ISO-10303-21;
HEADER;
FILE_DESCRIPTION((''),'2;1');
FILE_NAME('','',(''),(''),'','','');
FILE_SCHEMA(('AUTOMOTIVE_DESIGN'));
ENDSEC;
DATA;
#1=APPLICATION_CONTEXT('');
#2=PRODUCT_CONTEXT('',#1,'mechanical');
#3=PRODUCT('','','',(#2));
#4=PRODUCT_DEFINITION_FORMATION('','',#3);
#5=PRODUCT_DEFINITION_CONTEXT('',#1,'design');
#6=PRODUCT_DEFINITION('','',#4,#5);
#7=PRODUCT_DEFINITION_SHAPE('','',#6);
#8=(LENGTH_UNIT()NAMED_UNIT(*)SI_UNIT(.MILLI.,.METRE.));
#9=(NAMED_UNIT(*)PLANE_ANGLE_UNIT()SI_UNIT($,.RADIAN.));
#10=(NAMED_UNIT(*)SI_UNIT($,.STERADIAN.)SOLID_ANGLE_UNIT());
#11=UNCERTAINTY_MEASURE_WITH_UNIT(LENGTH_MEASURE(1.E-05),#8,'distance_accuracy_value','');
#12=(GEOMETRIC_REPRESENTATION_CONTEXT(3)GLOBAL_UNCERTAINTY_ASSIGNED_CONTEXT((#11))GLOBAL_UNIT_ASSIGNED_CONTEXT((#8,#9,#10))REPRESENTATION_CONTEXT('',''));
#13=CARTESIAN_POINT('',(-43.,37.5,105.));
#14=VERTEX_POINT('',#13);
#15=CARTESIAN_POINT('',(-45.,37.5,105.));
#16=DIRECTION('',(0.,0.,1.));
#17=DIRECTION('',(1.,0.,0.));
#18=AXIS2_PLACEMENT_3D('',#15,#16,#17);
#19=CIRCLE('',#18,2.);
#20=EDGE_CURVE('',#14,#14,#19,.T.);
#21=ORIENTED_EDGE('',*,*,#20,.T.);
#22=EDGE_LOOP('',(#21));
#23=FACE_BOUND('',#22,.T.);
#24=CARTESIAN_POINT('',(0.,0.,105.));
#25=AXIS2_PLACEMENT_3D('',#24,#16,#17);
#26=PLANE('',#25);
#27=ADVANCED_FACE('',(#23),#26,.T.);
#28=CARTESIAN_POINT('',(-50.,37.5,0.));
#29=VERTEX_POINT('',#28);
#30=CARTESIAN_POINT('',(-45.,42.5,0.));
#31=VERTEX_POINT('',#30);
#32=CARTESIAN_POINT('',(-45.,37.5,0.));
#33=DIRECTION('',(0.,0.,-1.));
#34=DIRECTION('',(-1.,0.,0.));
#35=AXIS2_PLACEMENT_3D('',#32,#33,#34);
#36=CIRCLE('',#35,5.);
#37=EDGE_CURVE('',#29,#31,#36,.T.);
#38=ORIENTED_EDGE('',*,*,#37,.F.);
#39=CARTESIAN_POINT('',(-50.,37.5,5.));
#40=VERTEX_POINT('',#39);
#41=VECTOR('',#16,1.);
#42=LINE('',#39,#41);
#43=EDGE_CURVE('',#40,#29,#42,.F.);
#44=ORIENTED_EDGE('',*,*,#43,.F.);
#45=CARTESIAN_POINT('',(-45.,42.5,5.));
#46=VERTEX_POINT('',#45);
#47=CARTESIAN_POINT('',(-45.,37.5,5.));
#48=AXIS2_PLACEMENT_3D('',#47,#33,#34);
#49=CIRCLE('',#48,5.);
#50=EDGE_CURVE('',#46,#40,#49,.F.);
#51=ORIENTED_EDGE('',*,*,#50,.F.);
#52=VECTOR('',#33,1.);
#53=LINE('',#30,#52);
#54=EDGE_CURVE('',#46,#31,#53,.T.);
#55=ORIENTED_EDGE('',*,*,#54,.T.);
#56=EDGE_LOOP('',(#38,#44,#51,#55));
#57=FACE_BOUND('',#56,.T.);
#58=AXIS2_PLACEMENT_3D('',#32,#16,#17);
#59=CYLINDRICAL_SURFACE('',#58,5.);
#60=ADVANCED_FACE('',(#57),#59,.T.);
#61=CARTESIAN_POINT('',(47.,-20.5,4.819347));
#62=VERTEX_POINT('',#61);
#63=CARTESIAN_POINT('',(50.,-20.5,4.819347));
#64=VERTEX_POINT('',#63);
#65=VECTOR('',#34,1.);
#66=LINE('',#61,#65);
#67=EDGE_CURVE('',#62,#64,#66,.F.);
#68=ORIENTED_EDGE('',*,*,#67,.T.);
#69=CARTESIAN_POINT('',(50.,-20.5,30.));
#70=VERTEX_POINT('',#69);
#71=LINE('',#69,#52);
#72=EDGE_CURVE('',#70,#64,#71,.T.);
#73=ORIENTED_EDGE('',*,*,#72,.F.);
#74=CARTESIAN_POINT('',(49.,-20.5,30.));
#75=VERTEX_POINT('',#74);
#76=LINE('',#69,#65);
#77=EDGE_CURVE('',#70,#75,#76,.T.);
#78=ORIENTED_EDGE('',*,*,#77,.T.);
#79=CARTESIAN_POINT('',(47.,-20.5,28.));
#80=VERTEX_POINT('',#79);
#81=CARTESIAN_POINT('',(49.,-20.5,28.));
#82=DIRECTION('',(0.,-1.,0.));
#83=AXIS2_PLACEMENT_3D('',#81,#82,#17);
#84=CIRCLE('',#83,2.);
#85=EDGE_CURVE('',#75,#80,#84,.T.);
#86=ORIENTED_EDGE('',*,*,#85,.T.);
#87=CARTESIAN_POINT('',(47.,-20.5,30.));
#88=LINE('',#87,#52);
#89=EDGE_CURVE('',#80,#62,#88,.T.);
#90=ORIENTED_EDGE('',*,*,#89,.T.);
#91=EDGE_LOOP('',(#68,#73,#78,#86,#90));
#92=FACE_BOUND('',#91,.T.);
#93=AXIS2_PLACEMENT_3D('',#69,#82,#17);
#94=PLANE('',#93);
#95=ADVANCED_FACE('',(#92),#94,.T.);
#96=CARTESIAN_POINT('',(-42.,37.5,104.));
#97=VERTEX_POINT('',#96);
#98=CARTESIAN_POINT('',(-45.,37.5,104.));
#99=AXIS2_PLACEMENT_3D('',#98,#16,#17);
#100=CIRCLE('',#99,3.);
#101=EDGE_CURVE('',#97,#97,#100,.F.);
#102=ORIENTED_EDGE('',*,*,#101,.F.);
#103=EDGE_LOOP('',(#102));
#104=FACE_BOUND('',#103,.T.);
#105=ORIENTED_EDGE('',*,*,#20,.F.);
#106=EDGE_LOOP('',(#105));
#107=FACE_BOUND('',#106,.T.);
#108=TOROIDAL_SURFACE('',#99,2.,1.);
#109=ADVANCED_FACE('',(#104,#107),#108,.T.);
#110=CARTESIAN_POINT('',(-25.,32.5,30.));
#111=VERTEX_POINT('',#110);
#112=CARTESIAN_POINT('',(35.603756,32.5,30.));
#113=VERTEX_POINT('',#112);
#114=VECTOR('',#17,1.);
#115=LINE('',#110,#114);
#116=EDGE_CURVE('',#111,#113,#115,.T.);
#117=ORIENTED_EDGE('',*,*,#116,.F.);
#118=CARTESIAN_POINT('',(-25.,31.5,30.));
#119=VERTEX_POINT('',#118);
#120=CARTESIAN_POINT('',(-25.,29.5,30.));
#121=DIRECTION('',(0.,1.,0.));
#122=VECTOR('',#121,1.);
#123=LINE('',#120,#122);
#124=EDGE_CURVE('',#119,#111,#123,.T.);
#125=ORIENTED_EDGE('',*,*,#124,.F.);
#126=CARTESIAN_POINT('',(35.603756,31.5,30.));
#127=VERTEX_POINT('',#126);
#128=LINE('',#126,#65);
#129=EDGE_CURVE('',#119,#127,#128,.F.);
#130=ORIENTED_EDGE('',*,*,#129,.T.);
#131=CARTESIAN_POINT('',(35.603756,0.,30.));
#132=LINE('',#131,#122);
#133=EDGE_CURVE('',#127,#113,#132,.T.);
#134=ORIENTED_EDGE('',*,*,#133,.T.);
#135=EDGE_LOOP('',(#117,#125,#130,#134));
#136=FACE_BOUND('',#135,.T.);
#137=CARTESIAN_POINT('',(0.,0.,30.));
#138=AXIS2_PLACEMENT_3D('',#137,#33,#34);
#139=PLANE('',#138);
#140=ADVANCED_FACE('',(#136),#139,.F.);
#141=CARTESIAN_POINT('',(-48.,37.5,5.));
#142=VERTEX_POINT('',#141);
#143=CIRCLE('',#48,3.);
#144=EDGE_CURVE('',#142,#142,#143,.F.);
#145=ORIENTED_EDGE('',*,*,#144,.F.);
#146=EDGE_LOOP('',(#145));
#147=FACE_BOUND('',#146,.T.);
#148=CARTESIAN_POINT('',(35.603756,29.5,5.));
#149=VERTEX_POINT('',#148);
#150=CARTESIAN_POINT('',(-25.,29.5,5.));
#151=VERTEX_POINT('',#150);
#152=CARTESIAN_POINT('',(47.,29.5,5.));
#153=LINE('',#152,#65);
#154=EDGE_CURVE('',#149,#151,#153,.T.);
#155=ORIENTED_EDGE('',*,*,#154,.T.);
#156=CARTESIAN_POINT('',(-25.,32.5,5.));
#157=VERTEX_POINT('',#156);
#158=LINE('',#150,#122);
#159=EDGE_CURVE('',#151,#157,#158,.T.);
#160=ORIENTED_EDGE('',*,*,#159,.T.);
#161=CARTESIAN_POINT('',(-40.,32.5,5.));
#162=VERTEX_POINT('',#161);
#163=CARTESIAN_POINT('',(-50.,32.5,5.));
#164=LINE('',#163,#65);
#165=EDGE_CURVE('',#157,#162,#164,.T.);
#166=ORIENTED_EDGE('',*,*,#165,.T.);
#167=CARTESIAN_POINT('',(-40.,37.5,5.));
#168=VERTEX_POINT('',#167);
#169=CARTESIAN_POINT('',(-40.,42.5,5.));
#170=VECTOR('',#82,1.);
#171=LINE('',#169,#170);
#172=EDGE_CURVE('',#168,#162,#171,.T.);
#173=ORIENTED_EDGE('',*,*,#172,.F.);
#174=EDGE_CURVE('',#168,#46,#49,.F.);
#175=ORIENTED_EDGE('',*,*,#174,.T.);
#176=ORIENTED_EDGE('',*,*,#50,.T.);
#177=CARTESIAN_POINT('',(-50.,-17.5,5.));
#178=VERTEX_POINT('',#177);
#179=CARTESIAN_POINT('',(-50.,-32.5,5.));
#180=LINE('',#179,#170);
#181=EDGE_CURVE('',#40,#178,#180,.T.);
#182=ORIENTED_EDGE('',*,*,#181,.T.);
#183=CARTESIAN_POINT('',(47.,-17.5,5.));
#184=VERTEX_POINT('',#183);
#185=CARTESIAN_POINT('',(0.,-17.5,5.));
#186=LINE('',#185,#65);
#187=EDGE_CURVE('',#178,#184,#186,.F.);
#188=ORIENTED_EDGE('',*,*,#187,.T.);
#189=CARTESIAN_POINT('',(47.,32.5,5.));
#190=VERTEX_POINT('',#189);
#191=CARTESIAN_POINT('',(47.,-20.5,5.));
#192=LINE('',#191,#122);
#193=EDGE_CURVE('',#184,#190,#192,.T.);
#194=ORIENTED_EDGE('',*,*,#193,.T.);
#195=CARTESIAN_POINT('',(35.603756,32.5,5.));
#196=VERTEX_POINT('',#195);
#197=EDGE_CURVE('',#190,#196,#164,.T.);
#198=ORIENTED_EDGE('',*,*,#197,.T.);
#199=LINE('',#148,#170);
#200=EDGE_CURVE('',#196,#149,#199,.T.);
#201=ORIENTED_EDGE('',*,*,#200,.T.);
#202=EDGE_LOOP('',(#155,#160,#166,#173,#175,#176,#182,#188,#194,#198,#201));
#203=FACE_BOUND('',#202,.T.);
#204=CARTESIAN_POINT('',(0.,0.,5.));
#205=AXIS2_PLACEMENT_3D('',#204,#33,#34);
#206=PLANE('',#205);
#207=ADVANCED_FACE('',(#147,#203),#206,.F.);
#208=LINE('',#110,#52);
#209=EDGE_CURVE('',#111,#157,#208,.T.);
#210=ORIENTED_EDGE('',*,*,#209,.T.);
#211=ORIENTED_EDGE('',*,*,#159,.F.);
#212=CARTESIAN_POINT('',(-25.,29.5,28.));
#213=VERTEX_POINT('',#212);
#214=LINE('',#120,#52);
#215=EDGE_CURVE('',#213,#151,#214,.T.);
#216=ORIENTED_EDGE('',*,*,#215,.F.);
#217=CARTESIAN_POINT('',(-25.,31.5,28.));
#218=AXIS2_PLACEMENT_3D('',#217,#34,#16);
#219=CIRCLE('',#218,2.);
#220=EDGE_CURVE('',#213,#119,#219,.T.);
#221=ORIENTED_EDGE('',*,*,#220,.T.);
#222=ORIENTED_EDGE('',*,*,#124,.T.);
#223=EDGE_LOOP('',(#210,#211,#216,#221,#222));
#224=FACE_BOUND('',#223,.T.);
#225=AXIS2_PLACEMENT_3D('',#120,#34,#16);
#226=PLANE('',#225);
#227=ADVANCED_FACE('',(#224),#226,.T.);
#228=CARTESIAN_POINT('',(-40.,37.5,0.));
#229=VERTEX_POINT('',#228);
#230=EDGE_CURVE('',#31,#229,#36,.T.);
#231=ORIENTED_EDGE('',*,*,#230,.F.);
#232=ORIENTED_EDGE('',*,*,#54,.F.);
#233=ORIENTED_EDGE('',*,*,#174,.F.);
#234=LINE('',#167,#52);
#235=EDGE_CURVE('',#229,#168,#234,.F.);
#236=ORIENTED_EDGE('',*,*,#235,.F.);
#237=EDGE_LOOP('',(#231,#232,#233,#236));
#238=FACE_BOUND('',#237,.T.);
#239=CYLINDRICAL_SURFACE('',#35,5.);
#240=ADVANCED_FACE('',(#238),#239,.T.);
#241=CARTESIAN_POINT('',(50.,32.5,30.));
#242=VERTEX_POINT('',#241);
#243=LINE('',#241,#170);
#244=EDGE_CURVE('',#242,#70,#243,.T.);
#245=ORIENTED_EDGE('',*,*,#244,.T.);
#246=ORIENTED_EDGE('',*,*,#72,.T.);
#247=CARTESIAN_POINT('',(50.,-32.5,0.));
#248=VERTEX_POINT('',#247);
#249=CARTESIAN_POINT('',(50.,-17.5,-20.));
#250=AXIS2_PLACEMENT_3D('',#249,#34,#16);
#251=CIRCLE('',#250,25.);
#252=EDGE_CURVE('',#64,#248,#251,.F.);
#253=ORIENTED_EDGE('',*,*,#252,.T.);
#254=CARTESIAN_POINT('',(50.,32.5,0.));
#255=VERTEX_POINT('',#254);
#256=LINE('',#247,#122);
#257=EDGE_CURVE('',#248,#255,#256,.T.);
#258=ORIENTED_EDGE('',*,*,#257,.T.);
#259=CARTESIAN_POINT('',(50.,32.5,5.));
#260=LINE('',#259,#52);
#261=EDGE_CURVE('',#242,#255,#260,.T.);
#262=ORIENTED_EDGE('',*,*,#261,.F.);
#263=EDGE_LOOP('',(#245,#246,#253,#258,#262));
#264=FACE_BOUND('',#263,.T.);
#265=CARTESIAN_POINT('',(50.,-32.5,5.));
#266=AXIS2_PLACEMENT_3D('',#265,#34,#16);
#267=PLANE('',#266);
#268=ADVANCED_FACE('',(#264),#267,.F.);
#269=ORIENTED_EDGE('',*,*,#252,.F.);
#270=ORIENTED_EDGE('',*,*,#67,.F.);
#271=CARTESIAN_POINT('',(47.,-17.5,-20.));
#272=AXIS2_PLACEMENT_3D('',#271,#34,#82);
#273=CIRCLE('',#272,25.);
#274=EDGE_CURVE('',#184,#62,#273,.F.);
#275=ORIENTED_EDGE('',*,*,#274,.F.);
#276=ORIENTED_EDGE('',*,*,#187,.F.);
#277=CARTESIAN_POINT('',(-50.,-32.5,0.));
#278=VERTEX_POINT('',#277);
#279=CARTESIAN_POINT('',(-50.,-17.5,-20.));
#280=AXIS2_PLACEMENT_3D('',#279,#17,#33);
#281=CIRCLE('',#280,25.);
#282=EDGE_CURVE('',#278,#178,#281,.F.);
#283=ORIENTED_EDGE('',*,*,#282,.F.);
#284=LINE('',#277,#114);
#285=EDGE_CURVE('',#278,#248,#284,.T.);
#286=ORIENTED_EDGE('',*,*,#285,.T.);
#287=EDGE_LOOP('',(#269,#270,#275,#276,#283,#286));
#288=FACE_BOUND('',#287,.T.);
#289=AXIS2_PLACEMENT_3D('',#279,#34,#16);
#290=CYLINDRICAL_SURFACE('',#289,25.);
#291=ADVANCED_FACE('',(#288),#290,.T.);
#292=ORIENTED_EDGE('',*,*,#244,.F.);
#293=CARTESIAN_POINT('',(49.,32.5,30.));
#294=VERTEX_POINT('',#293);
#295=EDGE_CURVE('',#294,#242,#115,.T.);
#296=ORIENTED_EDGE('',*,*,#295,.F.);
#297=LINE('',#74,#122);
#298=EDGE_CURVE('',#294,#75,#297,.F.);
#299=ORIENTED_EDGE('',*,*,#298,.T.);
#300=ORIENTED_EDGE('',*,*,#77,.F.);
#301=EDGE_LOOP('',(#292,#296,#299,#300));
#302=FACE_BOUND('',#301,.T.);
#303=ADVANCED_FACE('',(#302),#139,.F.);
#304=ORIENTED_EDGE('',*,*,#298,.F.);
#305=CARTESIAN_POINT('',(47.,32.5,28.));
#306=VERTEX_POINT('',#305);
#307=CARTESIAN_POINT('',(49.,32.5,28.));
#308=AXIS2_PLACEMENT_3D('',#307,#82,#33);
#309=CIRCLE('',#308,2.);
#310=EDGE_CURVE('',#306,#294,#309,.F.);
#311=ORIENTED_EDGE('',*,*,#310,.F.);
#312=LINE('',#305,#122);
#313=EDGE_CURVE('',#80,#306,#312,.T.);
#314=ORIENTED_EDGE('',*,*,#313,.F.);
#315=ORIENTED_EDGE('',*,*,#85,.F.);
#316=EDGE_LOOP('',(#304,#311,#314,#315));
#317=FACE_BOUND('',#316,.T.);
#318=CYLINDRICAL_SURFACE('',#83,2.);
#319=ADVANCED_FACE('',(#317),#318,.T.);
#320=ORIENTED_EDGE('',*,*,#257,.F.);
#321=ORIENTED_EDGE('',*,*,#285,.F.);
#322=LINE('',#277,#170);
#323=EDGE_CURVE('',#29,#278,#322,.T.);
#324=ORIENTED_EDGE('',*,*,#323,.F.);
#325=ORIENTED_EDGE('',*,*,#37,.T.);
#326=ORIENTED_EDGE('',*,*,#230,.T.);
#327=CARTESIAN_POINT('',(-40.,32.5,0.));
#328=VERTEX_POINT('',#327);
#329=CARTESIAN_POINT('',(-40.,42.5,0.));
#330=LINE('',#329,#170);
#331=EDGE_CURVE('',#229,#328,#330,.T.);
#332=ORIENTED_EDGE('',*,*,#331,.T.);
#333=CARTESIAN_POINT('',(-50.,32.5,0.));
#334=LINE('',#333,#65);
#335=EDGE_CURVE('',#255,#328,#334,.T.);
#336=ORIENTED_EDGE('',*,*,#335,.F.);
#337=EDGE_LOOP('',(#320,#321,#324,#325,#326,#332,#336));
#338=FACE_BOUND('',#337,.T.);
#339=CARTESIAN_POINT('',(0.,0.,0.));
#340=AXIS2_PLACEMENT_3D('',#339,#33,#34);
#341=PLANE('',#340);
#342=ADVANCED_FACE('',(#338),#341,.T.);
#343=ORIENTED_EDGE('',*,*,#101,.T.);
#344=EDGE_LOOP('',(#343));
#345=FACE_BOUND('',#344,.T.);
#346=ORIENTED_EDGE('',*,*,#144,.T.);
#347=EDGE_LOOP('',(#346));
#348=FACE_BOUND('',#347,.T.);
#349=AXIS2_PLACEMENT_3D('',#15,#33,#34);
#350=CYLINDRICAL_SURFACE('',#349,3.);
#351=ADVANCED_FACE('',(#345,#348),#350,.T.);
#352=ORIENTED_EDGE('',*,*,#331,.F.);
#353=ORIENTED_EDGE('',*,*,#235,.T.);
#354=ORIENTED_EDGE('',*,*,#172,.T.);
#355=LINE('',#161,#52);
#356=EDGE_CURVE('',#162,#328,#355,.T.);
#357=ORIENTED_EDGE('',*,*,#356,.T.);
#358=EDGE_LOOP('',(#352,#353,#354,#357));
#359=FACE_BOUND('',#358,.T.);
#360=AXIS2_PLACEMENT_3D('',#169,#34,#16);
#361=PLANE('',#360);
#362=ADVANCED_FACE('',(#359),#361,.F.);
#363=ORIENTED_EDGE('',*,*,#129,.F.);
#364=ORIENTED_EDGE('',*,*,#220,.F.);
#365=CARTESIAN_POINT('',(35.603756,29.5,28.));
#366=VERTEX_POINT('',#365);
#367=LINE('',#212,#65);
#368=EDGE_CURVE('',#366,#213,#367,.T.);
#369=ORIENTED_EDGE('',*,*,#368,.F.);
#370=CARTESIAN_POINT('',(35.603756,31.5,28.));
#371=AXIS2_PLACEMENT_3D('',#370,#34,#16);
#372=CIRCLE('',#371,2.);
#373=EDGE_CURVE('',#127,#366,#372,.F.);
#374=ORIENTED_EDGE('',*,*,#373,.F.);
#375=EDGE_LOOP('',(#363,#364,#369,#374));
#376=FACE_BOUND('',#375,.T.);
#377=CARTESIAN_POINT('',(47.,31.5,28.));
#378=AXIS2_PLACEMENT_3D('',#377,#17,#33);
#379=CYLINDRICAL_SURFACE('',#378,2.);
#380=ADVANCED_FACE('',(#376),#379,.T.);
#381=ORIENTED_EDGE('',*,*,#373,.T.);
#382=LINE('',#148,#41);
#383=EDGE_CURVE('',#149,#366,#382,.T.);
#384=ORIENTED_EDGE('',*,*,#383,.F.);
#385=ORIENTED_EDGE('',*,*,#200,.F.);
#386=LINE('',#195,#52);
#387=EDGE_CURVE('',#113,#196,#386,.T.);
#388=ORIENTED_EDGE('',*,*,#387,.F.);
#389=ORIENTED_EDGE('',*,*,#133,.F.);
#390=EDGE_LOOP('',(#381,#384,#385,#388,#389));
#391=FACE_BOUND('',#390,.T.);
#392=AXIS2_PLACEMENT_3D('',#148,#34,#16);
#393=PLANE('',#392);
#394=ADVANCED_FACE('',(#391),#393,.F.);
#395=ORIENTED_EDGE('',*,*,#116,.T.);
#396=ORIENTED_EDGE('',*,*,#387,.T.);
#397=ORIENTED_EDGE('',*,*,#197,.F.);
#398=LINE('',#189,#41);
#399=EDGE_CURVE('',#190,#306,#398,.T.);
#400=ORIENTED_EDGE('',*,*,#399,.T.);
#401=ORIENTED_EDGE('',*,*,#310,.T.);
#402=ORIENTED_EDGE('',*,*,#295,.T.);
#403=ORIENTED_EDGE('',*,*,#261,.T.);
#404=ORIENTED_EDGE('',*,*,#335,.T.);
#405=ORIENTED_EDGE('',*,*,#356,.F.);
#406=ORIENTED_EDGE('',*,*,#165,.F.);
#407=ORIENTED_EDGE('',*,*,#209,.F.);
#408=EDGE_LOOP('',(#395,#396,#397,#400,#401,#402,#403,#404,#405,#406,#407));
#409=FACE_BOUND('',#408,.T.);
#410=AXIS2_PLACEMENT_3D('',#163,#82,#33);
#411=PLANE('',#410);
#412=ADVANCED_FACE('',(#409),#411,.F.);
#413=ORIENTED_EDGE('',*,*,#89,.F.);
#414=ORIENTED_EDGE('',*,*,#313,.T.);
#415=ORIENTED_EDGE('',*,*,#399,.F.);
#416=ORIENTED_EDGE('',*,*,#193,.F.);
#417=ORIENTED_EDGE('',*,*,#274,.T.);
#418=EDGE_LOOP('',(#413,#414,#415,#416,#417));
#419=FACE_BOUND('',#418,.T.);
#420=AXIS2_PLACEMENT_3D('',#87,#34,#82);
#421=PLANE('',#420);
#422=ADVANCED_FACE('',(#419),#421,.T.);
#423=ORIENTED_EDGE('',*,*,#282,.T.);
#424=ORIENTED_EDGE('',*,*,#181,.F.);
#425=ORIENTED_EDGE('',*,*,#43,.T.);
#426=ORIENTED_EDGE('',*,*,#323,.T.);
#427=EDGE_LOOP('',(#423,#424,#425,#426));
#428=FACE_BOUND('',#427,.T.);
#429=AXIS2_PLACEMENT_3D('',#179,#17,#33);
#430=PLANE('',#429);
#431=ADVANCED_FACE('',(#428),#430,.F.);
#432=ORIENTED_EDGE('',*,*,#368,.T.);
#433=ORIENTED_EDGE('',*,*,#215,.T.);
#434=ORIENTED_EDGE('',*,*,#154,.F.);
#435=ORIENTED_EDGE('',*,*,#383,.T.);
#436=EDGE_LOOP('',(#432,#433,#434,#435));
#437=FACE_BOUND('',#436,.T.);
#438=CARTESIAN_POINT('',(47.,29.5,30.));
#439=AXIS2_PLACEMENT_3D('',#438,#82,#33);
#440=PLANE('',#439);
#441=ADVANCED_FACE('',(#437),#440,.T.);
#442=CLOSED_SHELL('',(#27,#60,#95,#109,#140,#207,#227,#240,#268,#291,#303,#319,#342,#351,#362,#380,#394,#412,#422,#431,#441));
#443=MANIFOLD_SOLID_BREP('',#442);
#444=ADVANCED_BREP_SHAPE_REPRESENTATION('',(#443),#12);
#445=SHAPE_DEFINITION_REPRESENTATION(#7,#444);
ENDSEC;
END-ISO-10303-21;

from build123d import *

# Parameters (mm, degrees)
SKETCH1_W           = 100
SKETCH1_H           = 65
BOSS_EXTRUDE2_DEPTH = 5
BOSS_EXTRUDE3_DEPTH = 10
BOSS_EXTRUDE4_DEPTH = 25
BOSS_EXTRUDE5_DEPTH = 100
FILLET1_R           = 5
FILLET2_R           = 25
FILLET5_R           = 1
SKETCH7_W           = 11.396244365786963
SKETCH7_H           = 3.3746398880239497
CUT_EXTRUDE2_DEPTH  = 25
FILLET7_R           = 2


# Some blends are built 0.0001 mm under size
with BuildPart() as part:
    # Sketch1 → Boss-Extrude2 (new body)
    with BuildSketch(Plane.XY):
        Rectangle(SKETCH1_W, SKETCH1_H)
    extrude(amount=BOSS_EXTRUDE2_DEPTH)

    # Sketch3 → Boss-Extrude3 (add)
    with BuildSketch(Plane(origin=(0, 32.499999999999986, 0), x_dir=(1, 0, 0), z_dir=(0, 1, 0))):
        Polygon((-50.00000000000001, -5), (-40.00000000000001, -5), (-40, 0), (-50.00000000000001, 0), align=None)
    extrude(amount=BOSS_EXTRUDE3_DEPTH)

    # Sketch4 → Boss-Extrude4 (add)
    with BuildSketch(Plane.XY.offset(5)):
        Polygon((49.99999999999999, 32.499999999999986), (50, -20.50000000000001), (47, -20.500000000000014), (46.99999999999999, 29.49999999999999), (-25, 29.49999999999999), (-25, 32.499999999999986), align=None)
    extrude(amount=BOSS_EXTRUDE4_DEPTH)

    # Sketch5 → Boss-Extrude5 (add)
    with BuildSketch(Plane.XY.offset(5)):
        with BuildLine():
            ThreePointArc((-48.000000000000014, 37.49999999999999), (-45.000000000000014, 34.49999999999999), (-42.000000000000014, 37.49999999999999))
            Line((-42.000000000000014, 37.49999999999999), (-45.000000000000014, 37.49999999999999))
            Line((-45.000000000000014, 37.49999999999999), (-48.000000000000014, 37.49999999999999))
        make_face()
        with BuildLine():
            Line((-45.000000000000014, 37.49999999999999), (-42.000000000000014, 37.49999999999999))
            ThreePointArc((-42.000000000000014, 37.49999999999999), (-42.87867965644041, 39.621320343559674), (-45.00000000000013, 40.49999999999999))
            Line((-45.000000000000014, 40.49999999999999), (-45.000000000000014, 37.49999999999999))
        make_face()
        with BuildLine():
            Line((-48.000000000000014, 37.49999999999999), (-45.000000000000014, 37.49999999999999))
            Line((-45.000000000000014, 37.49999999999999), (-45.000000000000014, 40.49999999999999))
            ThreePointArc((-45.00000000000013, 40.49999999999999), (-47.121320343559695, 39.621320343559596), (-48.000000000000014, 37.49999999999999))
        make_face()
    extrude(amount=BOSS_EXTRUDE5_DEPTH)

    # Fillet1
    fillet1_edges = [part.edges().sort_by_distance(p)[0] for p in [
        (-50.00000000000001, 42.499999999999986, 2.5),
        (-40, 42.499999999999986, 2.5),
    ]]
    fillet(fillet1_edges, radius=FILLET1_R - 0.0001)  # a hair under: the kernel refuses the full size

    # Fillet2
    # the kernel refuses this fillet: 25 mm, written as the material it takes off along each edge
    with BuildSketch(Plane(origin=(-87.50000000000392, -32.500000000000014, 5), x_dir=(0, 1.1369e-13, -1), z_dir=(1, 0, 0))) as fillet2_piece_1_section:
        with BuildLine():
            CenterArc((25.000000000001705, 14.999999999998728), FILLET2_R, 179.9999999999935, 36.86989764584689)
            Line((1.7053e-12, 15.00000000000157), (0, 0))
            Line((0, 0), (5.000000000000753, 0))
        make_face()
    fillet2_piece_1 = extrude(amount=175.00000000000784, mode=Mode.PRIVATE)
    fillet2_piece_1 = split(fillet2_piece_1, bisect_by=Plane(origin=(47, -26.83563604767285, 3.245395234010585), z_dir=(-1, -1.4e-16, 0)), keep=Keep.TOP, mode=Mode.PRIVATE)
    add(fillet2_piece_1, mode=Mode.SUBTRACT)
    with BuildSketch(Plane(origin=(-87.50000000000392, -32.500000000000014, 5), x_dir=(0, 1.1369e-13, -1), z_dir=(1, 0, 0))) as fillet2_piece_2_section:
        with BuildLine():
            CenterArc((25.000000000001705, 14.999999999998728), FILLET2_R, 179.9999999999935, 36.86989764584689)
            Line((1.7053e-12, 15.00000000000157), (0, 0))
            Line((0, 0), (5.000000000000753, 0))
        make_face()
    fillet2_piece_2 = extrude(amount=175.00000000000784, mode=Mode.PRIVATE)
    fillet2_piece_2 = split(fillet2_piece_2, bisect_by=Plane(origin=(48.49999999999999, -20.500000000000014, 3.245395234010585), z_dir=(1.18e-15, -1, 0)), keep=Keep.TOP, mode=Mode.PRIVATE)
    add(fillet2_piece_2, mode=Mode.SUBTRACT)

    # Fillet5
    fillet5_edges = [part.edges().sort_by_distance(p)[0] for p in [
        (-48.000000000000014, 37.49999999999999, 105),
    ]]
    fillet(fillet5_edges, radius=FILLET5_R)

    # Sketch7 → Cut-Extrude2 (cut)
    with BuildSketch(Plane.XY.offset(30.000000000000004)):
        with Locations((41.301877817106515, 31.187319944011968)):
            Rectangle(SKETCH7_W, SKETCH7_H)
    extrude(amount=-CUT_EXTRUDE2_DEPTH, mode=Mode.SUBTRACT)

    # Fillet7
    fillet7_edges = [part.edges().sort_by_distance(p)[0] for p in [
        (47, 5.999999999999986, 30),
        (5.301877817106508, 29.49999999999999, 30),
    ]]
    fillet(fillet7_edges, radius=FILLET7_R)


solid = part.part
